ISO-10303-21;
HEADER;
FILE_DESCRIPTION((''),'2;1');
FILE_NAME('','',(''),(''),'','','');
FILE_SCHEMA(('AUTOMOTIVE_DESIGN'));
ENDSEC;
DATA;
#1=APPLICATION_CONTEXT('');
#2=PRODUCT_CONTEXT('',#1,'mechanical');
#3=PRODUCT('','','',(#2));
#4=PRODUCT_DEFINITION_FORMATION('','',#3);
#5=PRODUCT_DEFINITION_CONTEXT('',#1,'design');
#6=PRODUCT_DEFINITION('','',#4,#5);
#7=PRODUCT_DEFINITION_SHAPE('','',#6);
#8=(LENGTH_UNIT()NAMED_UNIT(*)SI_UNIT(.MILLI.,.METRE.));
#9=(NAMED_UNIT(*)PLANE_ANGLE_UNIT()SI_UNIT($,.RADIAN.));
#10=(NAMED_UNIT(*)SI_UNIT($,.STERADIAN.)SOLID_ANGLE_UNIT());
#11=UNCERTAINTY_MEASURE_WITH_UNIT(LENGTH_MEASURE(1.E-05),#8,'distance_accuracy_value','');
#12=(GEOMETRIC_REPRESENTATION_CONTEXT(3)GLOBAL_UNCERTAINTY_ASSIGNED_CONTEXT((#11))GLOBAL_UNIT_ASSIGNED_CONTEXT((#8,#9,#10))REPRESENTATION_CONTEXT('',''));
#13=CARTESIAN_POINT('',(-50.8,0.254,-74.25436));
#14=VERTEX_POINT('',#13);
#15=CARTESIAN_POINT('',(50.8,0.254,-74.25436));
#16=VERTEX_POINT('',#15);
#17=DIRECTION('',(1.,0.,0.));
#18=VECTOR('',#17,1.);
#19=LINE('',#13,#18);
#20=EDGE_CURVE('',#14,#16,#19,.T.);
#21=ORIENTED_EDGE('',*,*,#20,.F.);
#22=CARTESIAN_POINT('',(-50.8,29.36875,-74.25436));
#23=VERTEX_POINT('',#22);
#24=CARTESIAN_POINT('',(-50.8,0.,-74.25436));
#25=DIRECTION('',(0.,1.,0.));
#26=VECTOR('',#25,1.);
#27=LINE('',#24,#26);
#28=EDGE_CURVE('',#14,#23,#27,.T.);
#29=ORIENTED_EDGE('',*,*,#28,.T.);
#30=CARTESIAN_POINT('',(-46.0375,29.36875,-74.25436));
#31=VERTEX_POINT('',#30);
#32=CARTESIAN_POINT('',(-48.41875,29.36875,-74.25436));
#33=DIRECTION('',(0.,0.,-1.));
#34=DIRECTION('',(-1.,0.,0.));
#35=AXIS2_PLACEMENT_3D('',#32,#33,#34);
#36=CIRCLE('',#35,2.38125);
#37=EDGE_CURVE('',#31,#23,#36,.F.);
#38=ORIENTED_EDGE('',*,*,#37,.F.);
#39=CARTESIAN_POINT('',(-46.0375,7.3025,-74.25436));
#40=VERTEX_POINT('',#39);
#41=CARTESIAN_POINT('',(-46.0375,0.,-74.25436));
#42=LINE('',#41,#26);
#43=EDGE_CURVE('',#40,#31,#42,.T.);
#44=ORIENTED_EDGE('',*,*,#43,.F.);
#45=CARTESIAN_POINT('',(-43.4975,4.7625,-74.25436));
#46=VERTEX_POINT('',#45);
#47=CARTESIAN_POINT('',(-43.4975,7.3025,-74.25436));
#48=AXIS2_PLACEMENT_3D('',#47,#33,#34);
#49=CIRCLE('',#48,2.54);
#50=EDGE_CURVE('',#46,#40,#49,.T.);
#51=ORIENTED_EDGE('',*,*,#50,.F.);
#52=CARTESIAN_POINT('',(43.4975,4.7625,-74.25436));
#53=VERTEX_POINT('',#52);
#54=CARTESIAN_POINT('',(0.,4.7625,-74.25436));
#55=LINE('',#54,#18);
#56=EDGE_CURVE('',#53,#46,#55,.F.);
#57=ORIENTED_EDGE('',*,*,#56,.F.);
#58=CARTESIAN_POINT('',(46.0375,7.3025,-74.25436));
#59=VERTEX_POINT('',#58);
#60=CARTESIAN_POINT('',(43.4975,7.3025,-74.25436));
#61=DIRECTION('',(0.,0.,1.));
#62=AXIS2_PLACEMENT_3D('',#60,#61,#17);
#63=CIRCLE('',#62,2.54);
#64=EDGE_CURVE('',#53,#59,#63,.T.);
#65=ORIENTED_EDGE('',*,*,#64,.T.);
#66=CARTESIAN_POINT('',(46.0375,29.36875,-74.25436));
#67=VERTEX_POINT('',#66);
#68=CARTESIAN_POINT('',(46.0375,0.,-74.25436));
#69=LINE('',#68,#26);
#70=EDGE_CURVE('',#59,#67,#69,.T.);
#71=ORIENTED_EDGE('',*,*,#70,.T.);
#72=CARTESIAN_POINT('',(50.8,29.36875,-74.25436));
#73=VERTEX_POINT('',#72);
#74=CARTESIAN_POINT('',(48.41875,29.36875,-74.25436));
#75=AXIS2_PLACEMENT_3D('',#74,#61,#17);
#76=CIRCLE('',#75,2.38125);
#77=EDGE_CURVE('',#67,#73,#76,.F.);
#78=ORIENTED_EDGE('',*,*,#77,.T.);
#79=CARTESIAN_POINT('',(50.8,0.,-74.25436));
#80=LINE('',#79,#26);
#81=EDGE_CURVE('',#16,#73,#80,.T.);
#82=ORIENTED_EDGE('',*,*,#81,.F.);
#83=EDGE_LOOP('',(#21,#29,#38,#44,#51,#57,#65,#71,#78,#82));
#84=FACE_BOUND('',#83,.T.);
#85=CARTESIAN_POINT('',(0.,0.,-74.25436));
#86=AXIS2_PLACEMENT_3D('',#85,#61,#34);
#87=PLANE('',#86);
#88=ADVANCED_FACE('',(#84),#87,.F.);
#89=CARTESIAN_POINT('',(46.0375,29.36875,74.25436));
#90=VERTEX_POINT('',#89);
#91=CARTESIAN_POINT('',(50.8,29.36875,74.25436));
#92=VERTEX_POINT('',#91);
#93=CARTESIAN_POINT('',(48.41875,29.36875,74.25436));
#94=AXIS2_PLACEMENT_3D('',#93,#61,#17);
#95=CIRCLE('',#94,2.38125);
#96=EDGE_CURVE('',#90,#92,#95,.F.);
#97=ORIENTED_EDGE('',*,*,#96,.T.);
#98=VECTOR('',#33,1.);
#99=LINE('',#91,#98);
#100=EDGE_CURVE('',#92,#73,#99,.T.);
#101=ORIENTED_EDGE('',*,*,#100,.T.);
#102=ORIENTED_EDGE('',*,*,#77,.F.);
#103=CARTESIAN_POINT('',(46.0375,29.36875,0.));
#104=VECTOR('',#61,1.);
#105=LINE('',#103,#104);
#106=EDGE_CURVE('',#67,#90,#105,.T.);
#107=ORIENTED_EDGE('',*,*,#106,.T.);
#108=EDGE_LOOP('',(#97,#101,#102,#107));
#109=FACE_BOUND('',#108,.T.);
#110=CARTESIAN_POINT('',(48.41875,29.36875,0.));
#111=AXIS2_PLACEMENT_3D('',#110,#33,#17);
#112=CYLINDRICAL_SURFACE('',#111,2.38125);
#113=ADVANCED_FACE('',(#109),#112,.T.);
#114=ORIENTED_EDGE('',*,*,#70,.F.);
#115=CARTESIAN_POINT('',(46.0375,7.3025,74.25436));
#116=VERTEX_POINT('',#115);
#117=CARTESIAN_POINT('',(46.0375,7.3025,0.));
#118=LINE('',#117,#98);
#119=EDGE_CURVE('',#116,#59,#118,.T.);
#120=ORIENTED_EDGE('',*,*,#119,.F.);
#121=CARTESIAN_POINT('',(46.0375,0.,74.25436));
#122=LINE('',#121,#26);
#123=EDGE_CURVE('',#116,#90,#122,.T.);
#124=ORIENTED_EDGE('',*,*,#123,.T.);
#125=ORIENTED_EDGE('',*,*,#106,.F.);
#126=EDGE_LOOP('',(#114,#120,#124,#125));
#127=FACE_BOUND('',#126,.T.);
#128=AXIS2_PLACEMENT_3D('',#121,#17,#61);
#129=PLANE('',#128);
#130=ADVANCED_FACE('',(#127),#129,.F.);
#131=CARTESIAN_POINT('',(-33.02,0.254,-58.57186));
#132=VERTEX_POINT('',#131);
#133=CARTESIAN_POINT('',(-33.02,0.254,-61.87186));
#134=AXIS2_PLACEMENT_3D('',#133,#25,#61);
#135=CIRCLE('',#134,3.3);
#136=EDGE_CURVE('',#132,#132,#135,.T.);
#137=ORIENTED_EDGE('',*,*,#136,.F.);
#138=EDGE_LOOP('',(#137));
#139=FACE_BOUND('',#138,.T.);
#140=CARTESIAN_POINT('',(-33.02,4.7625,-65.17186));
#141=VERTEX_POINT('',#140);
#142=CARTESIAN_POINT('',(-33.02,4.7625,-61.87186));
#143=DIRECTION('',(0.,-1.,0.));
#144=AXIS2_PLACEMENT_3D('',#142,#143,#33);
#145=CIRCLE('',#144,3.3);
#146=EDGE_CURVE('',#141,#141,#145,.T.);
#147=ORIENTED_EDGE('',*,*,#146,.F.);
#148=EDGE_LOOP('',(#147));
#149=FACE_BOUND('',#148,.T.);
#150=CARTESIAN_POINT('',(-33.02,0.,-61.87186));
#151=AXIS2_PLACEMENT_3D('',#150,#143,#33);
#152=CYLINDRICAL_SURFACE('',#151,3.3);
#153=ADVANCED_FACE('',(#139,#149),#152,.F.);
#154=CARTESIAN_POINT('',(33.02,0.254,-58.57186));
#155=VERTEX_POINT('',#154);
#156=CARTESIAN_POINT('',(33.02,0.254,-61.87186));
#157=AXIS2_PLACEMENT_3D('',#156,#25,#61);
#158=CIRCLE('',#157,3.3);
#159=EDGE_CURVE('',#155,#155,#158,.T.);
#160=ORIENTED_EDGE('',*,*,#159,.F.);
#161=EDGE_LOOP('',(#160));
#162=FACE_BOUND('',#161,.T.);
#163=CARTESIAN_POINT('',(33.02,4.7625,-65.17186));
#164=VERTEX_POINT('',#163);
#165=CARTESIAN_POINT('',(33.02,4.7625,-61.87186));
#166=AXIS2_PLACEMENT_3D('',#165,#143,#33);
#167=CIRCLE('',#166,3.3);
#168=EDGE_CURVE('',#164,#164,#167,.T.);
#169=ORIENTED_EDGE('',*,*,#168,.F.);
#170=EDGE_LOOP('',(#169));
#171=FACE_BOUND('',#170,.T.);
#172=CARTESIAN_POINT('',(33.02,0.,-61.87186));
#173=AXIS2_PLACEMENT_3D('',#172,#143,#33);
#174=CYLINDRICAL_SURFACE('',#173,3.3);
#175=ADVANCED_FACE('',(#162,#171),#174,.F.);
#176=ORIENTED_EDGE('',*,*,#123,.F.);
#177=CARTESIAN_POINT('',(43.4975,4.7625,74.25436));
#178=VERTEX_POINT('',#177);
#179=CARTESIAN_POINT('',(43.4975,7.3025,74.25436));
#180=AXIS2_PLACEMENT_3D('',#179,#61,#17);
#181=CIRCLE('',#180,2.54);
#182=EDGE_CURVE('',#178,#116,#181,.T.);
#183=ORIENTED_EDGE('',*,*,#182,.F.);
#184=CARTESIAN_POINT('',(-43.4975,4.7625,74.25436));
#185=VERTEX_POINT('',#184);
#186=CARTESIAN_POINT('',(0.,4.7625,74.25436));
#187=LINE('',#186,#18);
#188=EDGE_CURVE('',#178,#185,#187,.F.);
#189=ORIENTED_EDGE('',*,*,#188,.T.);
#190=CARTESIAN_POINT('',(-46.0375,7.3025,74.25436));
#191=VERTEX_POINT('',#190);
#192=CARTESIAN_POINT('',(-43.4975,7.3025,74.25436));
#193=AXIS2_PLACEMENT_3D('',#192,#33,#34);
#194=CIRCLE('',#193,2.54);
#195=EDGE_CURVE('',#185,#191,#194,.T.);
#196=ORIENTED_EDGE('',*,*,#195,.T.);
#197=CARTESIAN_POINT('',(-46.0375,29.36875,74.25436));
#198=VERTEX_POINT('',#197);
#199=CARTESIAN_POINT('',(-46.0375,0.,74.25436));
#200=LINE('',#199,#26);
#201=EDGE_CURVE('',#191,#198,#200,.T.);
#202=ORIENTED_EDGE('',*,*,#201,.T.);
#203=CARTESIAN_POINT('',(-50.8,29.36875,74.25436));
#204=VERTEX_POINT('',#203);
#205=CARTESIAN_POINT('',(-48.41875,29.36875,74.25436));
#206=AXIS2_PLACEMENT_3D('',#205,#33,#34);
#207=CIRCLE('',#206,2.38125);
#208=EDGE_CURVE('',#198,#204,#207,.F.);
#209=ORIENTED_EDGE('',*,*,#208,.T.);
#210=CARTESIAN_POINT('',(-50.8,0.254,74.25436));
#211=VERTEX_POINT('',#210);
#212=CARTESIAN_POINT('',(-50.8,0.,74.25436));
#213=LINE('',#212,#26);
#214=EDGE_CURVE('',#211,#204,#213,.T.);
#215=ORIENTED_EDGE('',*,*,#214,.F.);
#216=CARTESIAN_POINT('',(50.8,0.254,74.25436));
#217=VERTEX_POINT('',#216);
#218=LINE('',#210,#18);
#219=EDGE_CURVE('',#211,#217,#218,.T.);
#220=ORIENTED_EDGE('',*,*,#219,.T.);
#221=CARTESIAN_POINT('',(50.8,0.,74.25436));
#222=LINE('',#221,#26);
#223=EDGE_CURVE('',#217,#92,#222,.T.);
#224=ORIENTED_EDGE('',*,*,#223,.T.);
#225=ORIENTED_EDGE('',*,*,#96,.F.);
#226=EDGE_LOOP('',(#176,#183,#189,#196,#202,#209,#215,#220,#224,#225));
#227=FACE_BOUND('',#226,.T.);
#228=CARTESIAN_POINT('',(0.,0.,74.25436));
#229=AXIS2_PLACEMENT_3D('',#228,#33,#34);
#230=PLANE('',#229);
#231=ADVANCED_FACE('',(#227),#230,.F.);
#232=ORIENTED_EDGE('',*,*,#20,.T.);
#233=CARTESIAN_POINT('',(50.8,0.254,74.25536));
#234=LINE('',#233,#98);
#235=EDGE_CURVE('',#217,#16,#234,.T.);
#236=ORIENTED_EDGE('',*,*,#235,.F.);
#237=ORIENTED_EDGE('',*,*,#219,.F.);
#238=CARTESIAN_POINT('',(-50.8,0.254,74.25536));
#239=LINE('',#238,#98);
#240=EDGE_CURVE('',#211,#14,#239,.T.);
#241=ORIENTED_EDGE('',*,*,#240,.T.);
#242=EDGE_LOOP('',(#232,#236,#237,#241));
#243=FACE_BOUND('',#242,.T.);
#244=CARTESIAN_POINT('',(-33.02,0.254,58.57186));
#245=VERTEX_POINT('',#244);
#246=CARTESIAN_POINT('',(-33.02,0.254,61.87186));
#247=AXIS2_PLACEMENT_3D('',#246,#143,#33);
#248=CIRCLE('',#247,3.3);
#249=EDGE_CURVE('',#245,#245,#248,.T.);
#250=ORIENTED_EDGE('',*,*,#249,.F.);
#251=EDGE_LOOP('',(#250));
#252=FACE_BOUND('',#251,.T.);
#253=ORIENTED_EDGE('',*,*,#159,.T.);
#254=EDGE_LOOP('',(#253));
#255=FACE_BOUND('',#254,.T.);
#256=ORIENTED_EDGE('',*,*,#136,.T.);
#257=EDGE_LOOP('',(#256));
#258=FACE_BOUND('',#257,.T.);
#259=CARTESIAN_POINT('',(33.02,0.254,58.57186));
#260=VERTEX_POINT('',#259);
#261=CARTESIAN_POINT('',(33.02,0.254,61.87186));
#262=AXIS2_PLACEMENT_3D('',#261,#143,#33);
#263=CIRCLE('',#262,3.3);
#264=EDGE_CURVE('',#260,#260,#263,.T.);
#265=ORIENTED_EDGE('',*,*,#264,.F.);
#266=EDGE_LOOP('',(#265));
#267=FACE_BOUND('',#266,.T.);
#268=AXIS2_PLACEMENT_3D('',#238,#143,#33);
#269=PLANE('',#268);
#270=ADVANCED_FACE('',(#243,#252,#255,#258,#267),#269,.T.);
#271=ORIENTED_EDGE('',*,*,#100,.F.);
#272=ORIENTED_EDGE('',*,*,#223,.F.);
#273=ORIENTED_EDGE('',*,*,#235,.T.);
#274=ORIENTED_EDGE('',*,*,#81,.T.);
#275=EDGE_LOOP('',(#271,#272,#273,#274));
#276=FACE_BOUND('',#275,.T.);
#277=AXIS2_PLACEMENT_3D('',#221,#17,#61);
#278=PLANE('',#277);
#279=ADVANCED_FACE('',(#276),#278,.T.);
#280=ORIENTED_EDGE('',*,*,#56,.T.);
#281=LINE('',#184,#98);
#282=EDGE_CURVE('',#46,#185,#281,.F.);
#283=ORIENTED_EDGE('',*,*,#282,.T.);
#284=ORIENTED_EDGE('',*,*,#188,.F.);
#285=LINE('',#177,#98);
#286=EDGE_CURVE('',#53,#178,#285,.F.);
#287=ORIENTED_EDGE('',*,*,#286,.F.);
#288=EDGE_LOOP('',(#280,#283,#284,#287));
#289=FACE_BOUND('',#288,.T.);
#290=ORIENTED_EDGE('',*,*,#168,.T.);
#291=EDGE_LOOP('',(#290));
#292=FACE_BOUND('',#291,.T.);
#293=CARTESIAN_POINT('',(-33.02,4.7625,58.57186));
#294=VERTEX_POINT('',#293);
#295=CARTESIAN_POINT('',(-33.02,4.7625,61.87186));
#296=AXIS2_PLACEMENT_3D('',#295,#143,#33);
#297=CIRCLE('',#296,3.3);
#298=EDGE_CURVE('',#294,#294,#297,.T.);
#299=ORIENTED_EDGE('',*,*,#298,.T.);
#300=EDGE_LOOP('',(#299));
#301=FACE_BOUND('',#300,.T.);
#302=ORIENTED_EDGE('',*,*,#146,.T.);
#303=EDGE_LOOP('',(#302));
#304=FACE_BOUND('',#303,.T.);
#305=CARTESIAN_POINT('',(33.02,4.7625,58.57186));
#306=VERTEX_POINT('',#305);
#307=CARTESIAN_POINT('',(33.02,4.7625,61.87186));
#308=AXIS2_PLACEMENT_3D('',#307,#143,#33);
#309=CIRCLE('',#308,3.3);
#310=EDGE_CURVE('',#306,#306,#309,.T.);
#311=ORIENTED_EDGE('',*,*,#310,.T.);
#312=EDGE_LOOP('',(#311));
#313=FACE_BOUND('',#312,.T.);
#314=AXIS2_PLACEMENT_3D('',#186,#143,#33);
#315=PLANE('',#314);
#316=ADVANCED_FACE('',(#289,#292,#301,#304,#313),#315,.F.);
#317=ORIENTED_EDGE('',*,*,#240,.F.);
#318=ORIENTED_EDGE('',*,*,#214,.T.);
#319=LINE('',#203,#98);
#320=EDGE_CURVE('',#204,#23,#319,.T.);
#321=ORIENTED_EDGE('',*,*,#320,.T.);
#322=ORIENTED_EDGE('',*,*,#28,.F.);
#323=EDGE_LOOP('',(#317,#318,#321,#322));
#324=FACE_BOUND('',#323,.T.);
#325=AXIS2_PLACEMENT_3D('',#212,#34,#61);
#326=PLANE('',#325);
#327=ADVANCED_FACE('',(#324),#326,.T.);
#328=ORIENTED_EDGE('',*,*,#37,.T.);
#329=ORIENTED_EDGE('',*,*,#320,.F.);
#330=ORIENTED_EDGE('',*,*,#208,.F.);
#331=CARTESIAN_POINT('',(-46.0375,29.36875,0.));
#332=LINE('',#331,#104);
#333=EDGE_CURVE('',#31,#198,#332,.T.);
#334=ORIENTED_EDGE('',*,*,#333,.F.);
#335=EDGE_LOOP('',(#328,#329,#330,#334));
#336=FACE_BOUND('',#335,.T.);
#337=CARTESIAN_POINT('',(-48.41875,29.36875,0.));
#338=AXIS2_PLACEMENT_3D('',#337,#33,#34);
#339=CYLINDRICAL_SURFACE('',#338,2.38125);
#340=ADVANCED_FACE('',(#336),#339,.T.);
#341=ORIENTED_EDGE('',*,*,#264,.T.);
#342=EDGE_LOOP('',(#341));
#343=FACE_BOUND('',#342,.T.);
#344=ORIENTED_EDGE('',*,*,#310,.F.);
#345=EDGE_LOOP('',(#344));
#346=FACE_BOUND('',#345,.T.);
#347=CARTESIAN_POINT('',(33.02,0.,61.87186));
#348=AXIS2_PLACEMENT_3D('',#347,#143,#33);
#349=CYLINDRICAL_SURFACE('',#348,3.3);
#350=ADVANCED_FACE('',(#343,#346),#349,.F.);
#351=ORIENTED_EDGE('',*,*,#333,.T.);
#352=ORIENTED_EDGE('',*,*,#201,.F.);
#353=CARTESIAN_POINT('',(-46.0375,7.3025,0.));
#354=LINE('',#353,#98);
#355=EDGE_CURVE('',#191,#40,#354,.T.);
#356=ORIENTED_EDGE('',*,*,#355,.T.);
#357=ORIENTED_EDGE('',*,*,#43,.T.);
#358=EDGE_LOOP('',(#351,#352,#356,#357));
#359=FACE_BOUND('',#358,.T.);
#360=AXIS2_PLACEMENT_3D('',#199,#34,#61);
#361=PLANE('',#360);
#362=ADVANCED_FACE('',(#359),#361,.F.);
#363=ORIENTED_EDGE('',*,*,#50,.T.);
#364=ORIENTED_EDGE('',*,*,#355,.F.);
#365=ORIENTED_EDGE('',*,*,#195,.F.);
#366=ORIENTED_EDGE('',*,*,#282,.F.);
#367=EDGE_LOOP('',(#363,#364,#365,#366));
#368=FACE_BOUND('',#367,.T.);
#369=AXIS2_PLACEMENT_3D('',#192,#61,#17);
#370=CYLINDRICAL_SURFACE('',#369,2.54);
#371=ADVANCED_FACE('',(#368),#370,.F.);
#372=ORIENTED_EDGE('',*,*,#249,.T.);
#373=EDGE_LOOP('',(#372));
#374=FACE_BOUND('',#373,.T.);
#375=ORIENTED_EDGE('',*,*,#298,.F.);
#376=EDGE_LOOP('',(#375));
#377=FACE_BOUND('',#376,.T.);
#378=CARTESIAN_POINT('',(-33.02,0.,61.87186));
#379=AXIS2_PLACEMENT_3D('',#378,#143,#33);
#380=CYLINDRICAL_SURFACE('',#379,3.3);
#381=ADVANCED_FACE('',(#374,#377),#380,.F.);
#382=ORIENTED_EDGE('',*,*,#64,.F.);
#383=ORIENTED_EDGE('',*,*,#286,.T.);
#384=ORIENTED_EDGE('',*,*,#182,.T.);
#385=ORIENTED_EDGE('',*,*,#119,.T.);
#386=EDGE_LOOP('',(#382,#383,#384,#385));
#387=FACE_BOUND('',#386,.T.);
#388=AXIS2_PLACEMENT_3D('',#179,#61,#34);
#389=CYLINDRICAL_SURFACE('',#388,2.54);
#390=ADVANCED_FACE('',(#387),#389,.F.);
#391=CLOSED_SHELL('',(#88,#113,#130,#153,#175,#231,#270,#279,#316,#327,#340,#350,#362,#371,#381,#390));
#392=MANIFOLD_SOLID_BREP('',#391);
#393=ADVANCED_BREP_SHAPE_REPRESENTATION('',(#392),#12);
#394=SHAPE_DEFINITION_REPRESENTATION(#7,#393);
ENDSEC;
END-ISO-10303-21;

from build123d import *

# Parameters (mm, degrees)
EXTRUDE_THIN1_DEPTH  = 74.25436
FILLET1_RADIUS       = 2.38125
FILLET1_LENGTH       = 74.25436
FILLET2_R            = 2.54
MIRROR1_START        = -74.25436
MIRROR1_DEPTH        = 148.50872
M6_CLEARANCE_HOLE1_D = 6.6
CUT_EXTRUDE5_DEPTH   = 74.25436


# Read off the part's stored shape, not the designer's step: Mirror1
with BuildPart() as part:
    # Sketch4 → Extrude-Thin1 (new body)
    with BuildSketch(Plane.XY):
        Polygon((0, 0), (-50.8, 0), (-50.8, 31.75), (-46.0375, 31.75), (-46.0375, 4.7625), (0, 4.7625), align=None)
    extrude(amount=EXTRUDE_THIN1_DEPTH)

    # Fillet1: full round fillet: the end face becomes a half cylinder, R = half its width
    fillet1_face = Plane((-48.41875, 31.75, 37.12718), x_dir=(0, 0, -1), z_dir=(0, 1, 0))  # on the end face: x along it, z out of the body
    fillet1_slab = fillet1_face.offset(-FILLET1_RADIUS / 2) * Box(FILLET1_LENGTH, 2 * FILLET1_RADIUS, FILLET1_RADIUS, mode=Mode.PRIVATE)  # the body's end, R deep
    fillet1_round = Plane((-48.41875, 29.36875, 37.12718), x_dir=(0, 1, 0), z_dir=(0, 0, -1)) * Cylinder(FILLET1_RADIUS, FILLET1_LENGTH, mode=Mode.PRIVATE)  # its axis R under the face
    add(fillet1_slab - fillet1_round, mode=Mode.SUBTRACT)

    # Fillet2
    fillet2_edges = [part.edges().sort_by_distance(p)[0] for p in [
        (-46.0375, 4.7625, 37.12718),
    ]]
    fillet(fillet2_edges, radius=FILLET2_R)

    # Mirror1 outline → Mirror1 (add)
    with BuildSketch(Plane.XY.offset(MIRROR1_START)):
        with BuildLine():
            ThreePointArc((-46.0375, 29.36875), (-48.41875, 31.75), (-50.8, 29.36875))
            Line((-50.8, 29.36875), (-50.8, 0))
            Line((-50.8, 0), (50.8, 0))
            Line((50.8, 0), (50.8, 29.36875))
            ThreePointArc((50.8, 29.36875), (48.41875, 31.75), (46.0375, 29.36875))
            Line((46.0375, 29.36875), (46.0375, 7.3025))
            ThreePointArc((46.0375, 7.3025), (45.293551224, 5.506448776), (43.4975, 4.7625))
            Line((43.4975, 4.7625), (-43.4975, 4.7625))
            ThreePointArc((-43.4975, 4.7625), (-45.293551224, 5.506448776), (-46.0375, 7.3025))
            Line((-46.0375, 7.3025), (-46.0375, 29.36875))
        make_face()
    extrude(amount=MIRROR1_DEPTH)

    # M6 Clearance Hole1 (through all)
    with Locations(Plane(origin=(-33.02, 0, 61.87186), x_dir=(0, 0, -1), z_dir=(0, -1, 0))):
        with Locations((0, 0), (0, 66.04), (123.74372, 0), (123.74372, 66.04)):
            Hole(M6_CLEARANCE_HOLE1_D / 2)

    # Sketch12 → Cut-Extrude5 (cut, symmetric)
    with BuildSketch(Plane.XY):
        Polygon((-50.8, 0.254), (50.8, 0.254), (50.8, 0), (50.8, -4.927247647), (-50.8, -4.927247647), (-50.8, 0), align=None)
    extrude(amount=CUT_EXTRUDE5_DEPTH, both=True, mode=Mode.SUBTRACT)


solid = part.part
